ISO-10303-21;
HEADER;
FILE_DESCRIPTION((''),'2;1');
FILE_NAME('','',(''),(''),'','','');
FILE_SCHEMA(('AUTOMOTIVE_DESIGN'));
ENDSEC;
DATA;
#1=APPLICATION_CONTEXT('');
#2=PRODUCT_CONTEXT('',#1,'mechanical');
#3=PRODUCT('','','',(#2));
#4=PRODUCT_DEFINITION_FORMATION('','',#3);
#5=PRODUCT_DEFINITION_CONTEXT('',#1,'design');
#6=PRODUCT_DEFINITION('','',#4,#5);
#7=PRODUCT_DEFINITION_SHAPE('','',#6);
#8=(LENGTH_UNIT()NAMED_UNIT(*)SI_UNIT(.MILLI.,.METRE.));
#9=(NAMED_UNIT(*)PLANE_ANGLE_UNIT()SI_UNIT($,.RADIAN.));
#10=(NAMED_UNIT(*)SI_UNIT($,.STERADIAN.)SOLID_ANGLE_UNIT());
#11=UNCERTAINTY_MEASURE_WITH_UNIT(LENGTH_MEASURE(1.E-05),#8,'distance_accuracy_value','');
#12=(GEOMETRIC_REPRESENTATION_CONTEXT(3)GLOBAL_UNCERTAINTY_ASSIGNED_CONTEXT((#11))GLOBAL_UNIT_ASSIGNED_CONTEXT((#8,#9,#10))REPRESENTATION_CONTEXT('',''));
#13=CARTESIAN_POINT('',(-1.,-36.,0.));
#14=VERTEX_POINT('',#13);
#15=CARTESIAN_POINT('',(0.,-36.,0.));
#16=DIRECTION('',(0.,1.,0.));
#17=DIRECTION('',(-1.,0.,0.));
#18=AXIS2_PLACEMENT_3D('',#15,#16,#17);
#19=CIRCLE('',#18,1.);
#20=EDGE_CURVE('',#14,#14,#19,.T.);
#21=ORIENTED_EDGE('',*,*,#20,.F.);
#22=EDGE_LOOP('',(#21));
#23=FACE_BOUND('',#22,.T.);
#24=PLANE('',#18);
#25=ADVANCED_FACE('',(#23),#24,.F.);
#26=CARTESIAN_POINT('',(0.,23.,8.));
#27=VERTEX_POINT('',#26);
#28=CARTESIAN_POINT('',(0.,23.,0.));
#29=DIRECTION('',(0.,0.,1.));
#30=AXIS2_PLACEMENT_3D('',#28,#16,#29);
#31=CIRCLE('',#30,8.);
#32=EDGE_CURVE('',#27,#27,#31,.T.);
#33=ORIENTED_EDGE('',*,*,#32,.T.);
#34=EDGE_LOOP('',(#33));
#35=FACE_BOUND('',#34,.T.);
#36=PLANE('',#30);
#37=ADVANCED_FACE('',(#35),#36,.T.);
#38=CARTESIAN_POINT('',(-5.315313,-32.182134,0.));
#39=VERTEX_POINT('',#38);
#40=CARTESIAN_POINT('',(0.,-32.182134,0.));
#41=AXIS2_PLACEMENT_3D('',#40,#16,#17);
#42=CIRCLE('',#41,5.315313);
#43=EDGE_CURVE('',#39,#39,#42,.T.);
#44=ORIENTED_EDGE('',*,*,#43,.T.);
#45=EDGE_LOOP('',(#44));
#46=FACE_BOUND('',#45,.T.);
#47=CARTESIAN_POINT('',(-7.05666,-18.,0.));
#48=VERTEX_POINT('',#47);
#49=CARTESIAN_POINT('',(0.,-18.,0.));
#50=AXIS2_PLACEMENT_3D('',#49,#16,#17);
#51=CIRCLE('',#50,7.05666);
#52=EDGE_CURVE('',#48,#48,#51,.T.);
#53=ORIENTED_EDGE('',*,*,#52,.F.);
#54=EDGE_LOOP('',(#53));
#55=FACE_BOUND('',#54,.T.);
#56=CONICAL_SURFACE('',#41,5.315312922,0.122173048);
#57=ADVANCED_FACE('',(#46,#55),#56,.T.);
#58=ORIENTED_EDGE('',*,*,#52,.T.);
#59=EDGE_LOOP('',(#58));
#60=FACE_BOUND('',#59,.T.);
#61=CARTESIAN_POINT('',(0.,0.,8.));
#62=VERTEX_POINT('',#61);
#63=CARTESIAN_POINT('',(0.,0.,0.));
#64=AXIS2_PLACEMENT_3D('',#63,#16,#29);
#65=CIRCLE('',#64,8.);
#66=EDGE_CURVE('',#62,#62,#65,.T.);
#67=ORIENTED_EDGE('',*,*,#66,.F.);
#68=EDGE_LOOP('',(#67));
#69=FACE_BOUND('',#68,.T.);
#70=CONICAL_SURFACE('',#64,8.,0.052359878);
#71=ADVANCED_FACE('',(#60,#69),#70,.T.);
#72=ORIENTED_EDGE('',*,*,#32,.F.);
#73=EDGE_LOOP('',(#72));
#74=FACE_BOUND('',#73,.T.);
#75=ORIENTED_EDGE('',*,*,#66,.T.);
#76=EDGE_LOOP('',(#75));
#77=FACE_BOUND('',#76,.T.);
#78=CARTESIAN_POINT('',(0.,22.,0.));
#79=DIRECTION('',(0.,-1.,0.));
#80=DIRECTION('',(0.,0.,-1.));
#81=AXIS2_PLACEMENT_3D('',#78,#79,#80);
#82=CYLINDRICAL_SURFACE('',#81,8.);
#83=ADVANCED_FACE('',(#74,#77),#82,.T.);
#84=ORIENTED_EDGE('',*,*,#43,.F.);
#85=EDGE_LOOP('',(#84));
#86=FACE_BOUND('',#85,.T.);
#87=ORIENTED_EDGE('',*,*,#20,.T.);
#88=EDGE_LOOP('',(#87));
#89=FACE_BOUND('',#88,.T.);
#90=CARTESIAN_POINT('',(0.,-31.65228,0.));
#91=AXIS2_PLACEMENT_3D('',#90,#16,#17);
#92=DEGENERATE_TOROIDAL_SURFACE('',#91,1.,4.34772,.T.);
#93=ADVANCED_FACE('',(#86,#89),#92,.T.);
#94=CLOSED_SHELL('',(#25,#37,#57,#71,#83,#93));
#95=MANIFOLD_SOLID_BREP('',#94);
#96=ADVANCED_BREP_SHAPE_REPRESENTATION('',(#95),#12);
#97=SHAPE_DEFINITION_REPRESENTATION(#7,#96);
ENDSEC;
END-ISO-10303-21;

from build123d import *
from build123d.topology import SkipClean

# Parameters (mm, degrees)
SKETCH_608_R        = 8
EXTRUDE_1_DEPTH     = 22
EXTRUDE_2_OUTLINE_W = 8
EXTRUDE_2_OUTLINE_H = 1


# Read off the part's stored shape, not the designer's step: 凸台-拉伸2
with BuildPart() as part:
    # Sketch 608 → 凸台-拉伸1 (new body)
    with BuildSketch(Plane(origin=(0, 0, 0), x_dir=(1, 0, 0), z_dir=(0, 1, 0))):
        with Locations(Location((0, 0, 0), (0, 0, 270))):
            Circle(SKETCH_608_R)
    extrude(amount=EXTRUDE_1_DEPTH)

    # 凸台-拉伸2 outline → 凸台-拉伸2 (revolve)
    with SkipClean():  # the faces are left unmerged after this step: merging them gives an invalid solid
        with BuildSketch(Plane.XY):
            with Locations((4, 22.5)):
                Rectangle(EXTRUDE_2_OUTLINE_W, EXTRUDE_2_OUTLINE_H)
            Polygon((8, 0), (0, 0), (0, -18), (7.056659973, -18), align=None)
        revolve(axis=Axis((0, 0, 0), (0, 1, 0)))
    add(part.part.scale(1), mode=Mode.REPLACE)  # the faces are merged on a copy

    # 草图7 → 旋转4 (revolve)
    with BuildSketch(Plane.XY, mode=Mode.PRIVATE) as revolve_4_sk:
        with BuildLine():
            Line((0, -18), (7.056659973, -18))
            Line((7.056659973, -18), (5.315312922, -32.182133633))
            ThreePointArc((5.315312922, -32.182133633), (3.880886548, -34.908529724), (1, -36))
            Line((1, -36), (0, -36))
            Line((0, -36), (0, -18))
        make_face()
    revolve(revolve_4_sk.sketch.rotate(Axis((0, -18, 0), (0, -1, 0)), 90), axis=Axis((0, -18, 0), (0, -1, 0)))


solid = part.part
